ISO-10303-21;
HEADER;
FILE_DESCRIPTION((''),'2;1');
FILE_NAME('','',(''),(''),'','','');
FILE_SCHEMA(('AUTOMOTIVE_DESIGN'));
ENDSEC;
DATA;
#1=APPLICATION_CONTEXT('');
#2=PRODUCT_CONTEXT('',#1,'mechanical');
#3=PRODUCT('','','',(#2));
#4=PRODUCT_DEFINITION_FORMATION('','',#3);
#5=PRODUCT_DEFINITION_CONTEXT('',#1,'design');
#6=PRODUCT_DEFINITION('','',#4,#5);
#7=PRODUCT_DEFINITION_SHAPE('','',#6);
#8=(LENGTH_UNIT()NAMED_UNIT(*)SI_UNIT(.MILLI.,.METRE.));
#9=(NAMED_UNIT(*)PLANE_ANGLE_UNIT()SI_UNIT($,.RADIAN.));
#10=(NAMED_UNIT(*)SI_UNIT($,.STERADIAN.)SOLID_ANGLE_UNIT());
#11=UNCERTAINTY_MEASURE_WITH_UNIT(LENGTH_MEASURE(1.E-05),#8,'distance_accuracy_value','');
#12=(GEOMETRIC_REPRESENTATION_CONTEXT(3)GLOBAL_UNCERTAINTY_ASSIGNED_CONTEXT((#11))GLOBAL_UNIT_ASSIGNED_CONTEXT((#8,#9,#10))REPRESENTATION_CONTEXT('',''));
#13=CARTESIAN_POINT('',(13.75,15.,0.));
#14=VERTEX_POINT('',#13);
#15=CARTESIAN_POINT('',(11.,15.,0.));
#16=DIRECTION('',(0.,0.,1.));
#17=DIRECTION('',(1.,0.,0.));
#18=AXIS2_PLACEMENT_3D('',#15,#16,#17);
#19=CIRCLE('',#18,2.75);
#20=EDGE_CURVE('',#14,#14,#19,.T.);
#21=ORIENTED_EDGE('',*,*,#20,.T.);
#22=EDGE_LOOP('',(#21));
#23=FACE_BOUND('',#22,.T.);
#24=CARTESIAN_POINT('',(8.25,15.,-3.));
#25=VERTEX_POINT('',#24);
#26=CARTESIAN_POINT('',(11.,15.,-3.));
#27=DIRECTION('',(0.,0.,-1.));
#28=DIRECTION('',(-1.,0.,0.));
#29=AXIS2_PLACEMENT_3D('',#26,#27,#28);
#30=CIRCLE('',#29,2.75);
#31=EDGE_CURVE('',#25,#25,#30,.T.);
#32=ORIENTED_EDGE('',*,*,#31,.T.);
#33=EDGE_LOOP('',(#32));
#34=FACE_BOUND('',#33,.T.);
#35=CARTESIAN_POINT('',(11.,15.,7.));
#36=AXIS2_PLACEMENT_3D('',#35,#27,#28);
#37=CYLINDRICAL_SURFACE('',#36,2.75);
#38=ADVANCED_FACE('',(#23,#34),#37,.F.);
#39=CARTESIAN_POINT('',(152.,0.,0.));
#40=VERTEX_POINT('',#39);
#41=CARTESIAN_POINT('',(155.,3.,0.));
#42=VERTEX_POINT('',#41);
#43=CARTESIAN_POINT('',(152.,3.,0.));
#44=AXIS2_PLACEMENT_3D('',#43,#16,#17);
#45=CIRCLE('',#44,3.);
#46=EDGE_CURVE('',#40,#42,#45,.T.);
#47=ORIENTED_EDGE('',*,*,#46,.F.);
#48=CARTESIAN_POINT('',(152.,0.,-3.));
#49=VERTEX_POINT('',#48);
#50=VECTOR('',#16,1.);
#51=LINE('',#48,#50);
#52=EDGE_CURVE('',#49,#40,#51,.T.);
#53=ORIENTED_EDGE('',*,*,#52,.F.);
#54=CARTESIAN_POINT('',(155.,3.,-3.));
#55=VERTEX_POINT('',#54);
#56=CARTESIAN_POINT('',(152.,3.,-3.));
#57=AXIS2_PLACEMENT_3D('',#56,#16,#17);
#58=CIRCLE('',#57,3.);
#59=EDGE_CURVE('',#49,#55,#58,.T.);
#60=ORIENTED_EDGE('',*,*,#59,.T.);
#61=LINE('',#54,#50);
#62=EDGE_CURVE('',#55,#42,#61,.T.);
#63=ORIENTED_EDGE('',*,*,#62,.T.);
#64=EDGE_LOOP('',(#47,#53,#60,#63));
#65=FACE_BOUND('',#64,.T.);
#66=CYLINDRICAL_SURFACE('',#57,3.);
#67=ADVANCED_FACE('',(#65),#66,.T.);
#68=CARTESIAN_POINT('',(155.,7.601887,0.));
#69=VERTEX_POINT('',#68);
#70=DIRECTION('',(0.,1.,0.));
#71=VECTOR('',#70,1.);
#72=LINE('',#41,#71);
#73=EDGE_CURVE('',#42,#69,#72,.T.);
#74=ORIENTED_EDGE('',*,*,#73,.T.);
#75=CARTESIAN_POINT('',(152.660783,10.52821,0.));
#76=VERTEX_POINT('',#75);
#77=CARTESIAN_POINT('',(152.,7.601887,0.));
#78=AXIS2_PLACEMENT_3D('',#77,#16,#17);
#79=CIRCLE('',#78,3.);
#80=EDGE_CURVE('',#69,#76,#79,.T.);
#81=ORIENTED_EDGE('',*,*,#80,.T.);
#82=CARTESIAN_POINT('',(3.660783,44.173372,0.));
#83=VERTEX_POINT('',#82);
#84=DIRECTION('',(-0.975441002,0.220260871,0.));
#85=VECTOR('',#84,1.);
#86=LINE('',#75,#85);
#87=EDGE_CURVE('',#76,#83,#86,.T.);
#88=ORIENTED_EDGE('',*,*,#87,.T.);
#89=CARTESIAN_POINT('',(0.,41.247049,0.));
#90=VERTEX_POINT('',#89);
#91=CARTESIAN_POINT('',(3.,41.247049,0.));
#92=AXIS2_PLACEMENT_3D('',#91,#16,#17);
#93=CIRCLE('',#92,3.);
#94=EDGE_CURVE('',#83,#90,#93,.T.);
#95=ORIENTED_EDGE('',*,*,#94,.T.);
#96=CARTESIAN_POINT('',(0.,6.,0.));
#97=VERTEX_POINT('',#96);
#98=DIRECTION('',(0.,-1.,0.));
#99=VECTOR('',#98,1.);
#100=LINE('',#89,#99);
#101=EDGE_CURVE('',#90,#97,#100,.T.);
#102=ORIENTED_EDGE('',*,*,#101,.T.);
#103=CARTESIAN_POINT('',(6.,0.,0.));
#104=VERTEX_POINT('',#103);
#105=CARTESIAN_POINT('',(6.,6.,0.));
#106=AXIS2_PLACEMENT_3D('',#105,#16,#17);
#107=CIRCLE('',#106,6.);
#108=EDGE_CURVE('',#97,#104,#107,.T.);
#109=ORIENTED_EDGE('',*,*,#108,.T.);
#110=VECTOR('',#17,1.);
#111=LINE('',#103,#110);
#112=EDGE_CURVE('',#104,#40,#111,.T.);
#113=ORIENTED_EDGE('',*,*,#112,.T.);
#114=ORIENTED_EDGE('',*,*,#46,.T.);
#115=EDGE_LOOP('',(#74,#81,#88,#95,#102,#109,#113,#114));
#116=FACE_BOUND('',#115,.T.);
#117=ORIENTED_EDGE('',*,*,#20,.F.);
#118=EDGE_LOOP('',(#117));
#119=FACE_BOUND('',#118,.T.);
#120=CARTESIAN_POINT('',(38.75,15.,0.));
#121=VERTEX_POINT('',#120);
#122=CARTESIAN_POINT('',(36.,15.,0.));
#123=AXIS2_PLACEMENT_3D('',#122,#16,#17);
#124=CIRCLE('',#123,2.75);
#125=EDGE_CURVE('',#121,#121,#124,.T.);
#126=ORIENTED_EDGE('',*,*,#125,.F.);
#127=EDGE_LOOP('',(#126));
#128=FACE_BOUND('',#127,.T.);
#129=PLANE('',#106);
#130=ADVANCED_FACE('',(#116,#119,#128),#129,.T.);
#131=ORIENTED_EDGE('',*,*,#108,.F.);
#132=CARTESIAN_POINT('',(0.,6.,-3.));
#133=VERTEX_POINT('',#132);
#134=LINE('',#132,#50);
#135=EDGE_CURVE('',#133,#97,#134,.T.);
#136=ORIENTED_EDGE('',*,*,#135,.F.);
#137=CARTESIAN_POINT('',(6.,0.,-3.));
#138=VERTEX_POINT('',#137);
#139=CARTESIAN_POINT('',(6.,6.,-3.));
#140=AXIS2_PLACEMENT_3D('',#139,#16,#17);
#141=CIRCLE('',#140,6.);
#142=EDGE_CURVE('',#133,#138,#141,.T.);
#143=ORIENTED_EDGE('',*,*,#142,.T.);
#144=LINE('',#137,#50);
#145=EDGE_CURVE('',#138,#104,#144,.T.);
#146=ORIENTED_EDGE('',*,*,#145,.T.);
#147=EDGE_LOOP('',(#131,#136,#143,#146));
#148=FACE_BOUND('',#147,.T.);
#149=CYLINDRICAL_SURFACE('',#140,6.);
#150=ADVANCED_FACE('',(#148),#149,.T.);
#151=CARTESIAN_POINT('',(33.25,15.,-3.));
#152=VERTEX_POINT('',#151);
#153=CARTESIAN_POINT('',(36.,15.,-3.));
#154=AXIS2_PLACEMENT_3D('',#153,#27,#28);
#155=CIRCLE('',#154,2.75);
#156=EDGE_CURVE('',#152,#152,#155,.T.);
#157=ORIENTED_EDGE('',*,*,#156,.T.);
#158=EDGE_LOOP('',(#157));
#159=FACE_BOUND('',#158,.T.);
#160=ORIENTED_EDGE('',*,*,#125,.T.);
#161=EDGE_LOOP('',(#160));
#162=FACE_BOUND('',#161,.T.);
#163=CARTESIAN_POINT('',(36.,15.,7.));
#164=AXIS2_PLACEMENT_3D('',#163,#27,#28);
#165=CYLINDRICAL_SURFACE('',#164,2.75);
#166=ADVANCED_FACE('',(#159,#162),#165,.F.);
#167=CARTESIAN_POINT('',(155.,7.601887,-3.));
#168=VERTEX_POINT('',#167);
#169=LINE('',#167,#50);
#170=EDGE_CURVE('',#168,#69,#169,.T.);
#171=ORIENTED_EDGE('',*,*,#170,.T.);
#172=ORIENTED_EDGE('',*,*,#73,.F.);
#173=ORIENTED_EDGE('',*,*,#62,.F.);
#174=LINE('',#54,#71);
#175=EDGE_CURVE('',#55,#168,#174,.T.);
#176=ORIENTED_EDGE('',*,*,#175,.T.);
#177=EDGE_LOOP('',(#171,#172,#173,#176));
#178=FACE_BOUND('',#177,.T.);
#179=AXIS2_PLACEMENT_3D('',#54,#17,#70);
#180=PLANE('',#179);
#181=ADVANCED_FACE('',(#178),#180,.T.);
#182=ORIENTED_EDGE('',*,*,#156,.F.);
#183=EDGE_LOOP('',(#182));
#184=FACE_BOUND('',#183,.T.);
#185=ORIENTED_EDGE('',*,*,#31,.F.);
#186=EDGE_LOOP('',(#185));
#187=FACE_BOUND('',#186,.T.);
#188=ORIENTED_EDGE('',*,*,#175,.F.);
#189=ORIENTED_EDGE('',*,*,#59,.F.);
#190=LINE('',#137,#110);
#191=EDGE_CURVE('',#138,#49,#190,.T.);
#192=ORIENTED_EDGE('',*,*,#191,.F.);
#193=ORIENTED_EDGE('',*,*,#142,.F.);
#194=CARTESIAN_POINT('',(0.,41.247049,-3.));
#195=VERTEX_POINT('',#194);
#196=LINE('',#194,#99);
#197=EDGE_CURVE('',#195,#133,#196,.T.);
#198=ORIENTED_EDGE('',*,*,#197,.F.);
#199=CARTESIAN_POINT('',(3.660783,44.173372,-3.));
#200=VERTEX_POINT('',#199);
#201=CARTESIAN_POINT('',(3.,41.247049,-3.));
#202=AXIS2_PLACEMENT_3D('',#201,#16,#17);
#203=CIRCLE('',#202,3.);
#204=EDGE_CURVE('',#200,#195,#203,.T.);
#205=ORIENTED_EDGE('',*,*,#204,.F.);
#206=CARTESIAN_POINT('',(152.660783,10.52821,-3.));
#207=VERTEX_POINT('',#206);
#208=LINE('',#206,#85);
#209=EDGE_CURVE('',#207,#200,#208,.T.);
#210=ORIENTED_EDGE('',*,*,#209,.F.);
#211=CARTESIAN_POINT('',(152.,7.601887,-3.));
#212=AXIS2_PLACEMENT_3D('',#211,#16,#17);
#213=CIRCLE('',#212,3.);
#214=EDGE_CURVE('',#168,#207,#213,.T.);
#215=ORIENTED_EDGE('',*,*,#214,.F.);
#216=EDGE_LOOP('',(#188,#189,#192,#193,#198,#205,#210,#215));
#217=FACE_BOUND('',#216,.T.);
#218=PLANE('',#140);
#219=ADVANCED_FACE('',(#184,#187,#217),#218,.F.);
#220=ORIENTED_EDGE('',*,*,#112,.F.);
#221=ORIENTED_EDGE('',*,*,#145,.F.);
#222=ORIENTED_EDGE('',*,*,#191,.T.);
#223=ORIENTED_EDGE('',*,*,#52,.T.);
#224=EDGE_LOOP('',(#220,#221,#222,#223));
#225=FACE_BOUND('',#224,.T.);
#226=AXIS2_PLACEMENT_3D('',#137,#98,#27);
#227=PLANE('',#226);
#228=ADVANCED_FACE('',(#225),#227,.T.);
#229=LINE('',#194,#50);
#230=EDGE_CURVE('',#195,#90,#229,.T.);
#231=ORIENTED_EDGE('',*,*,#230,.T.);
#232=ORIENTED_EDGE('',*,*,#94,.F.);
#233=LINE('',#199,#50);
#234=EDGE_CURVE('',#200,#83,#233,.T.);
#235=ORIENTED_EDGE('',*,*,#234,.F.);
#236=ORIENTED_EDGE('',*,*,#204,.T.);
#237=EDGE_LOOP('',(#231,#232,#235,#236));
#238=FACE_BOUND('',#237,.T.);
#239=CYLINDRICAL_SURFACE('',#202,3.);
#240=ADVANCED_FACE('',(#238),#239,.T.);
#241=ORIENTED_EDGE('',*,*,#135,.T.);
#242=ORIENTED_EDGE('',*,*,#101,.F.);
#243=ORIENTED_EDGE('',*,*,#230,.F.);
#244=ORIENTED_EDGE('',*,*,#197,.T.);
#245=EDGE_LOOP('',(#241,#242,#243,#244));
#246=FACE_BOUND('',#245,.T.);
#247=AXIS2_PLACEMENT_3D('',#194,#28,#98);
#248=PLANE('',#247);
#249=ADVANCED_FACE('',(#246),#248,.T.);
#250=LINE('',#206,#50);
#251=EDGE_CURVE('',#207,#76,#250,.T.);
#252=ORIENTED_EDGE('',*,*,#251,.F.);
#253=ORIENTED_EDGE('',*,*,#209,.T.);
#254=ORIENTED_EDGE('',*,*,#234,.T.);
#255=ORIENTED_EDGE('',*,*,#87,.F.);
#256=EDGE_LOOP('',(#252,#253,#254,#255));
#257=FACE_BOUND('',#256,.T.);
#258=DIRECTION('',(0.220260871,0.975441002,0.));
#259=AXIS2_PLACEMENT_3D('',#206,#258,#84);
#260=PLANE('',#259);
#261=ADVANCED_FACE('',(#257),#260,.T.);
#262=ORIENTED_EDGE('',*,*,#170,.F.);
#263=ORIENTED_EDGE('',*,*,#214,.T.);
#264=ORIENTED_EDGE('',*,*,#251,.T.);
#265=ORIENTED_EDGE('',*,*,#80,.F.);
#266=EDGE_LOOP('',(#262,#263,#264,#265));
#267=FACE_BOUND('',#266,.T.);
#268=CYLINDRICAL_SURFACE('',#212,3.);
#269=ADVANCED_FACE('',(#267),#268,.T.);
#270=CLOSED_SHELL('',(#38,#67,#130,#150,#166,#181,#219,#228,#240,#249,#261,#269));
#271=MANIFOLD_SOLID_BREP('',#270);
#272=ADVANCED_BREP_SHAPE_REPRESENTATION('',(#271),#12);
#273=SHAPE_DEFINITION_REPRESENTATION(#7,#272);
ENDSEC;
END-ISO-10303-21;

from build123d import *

# Parameters (mm, degrees)
BASE_FLANGE1_DEPTH = 3
SKETCH6_R          = 2.75
CUT_EXTRUDE1_DEPTH = 10


# Sheet-metal steps are written as plain solids
with BuildPart() as part:
    # Sketch1 → Base-Flange1 (new body)
    with BuildSketch(Plane.XY):
        with BuildLine():
            Line((6, 0), (152, 0))
            ThreePointArc((152, 0), (154.121320344, 0.878679656), (155, 3))
            Line((155, 3), (155, 7.601887371))
            ThreePointArc((155, 7.601887371), (154.343325398, 9.475073448), (152.660782614, 10.528210377))
            Line((152.660782614, 10.528210377), (3.660782614, 44.173371668))
            ThreePointArc((3.660782614, 44.173371668), (1.126813923, 43.59037406), (0, 41.247048662))
            Line((0, 41.247048662), (0, 6))
            ThreePointArc((0, 6), (1.757359313, 1.757359313), (6, 0))
        make_face()
    extrude(amount=-BASE_FLANGE1_DEPTH)

    # Sketch6 → Cut-Extrude1 (cut)
    with BuildSketch(Plane(origin=(0, 0, -3), x_dir=(-1, 0, 0), z_dir=(0, 0, -1))):
        with Locations((-11, 15)):
            Circle(SKETCH6_R)
        with Locations((-36, 15)):
            Circle(SKETCH6_R)
    extrude(amount=-CUT_EXTRUDE1_DEPTH, mode=Mode.SUBTRACT)


solid = part.part
